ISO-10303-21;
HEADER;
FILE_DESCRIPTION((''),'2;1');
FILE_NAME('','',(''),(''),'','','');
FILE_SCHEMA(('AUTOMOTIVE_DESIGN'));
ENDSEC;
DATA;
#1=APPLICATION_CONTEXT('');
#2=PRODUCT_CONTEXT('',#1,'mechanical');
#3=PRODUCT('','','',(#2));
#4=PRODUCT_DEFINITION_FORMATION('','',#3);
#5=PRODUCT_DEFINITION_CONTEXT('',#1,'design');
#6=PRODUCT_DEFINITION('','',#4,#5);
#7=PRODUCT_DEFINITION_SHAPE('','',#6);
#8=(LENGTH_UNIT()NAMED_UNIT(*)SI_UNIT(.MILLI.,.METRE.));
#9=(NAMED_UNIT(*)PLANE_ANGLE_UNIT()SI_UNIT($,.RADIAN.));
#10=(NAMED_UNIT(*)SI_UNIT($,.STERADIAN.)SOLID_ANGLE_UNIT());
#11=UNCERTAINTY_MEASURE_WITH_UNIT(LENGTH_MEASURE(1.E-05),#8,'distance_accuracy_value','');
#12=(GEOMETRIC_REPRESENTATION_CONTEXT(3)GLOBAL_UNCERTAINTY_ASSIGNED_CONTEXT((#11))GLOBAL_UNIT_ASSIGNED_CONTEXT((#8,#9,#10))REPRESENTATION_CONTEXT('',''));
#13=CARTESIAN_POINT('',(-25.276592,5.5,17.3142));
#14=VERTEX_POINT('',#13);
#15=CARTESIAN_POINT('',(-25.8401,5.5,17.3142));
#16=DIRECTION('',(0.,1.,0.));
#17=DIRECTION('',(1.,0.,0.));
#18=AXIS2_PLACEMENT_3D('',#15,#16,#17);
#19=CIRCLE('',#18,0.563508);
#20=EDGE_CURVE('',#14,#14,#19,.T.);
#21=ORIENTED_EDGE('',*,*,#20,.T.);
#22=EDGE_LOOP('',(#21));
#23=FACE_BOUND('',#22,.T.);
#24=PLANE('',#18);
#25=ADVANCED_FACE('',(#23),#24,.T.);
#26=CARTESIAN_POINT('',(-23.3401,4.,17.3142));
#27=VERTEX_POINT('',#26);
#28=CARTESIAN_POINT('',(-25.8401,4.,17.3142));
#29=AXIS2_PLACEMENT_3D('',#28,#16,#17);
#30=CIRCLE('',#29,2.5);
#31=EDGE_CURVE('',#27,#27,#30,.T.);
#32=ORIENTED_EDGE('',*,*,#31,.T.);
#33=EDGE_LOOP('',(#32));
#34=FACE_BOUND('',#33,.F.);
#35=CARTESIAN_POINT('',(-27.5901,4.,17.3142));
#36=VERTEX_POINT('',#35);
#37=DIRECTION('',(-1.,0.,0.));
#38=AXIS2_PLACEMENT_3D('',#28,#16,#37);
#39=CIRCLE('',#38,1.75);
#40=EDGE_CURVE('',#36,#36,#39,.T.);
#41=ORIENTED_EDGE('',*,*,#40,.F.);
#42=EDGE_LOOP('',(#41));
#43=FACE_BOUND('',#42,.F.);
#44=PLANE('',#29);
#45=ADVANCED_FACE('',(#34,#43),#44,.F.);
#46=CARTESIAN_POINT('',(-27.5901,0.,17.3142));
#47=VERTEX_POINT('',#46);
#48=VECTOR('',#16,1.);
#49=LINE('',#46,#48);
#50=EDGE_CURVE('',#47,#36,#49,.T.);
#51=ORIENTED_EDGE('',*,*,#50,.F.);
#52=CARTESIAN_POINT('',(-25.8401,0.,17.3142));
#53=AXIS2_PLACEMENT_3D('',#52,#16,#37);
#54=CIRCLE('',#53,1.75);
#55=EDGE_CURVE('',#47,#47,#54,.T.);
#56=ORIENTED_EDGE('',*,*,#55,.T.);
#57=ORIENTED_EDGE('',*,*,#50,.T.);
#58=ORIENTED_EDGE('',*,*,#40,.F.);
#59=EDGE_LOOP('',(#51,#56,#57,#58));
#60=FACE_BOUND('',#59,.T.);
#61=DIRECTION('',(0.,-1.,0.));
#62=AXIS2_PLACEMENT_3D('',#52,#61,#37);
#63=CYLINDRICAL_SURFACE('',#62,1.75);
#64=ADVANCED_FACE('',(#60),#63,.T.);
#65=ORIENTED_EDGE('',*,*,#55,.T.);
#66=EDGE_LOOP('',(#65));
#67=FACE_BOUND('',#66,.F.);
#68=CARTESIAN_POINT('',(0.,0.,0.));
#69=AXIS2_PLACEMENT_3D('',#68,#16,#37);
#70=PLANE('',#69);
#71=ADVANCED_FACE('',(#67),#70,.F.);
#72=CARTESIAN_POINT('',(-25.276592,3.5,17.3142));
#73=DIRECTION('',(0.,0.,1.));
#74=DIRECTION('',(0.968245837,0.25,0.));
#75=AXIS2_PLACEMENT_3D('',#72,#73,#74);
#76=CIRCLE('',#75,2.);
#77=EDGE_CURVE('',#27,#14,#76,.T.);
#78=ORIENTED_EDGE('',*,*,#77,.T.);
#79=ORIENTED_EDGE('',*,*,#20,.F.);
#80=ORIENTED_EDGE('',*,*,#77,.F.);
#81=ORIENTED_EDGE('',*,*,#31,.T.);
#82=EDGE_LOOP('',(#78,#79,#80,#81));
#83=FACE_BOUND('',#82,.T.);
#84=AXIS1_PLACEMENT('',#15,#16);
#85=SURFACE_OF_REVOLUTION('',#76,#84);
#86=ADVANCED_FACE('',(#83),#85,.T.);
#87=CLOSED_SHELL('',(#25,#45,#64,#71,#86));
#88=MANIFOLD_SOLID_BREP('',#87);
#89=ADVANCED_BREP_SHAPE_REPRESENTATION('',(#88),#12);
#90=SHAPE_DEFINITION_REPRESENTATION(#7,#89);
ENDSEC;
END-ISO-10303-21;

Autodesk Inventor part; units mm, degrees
ref_plane "YZ Plane" through (0, 0, 0) normal (1, 0, 0) x (0, 1, 0)
ref_plane "XZ Plane" through (0, 0, 0) normal (0, 1, 0) x (-1, 0, 0)
ref_plane "XY Plane" through (0, 0, 0) normal (0, 0, 1) x (1, 0, 0)
sketch "Sketch1" plane through (0, 0, 0) normal (0, 1, 0) x (-1, 0, 0)
  circle A0 centre (25.8401, 17.3142) radius 1.75
  point P0 (0, 0)
  dimension "d0" = 3.5
extrude "Extrusion1" add sketch "Sketch1" along normal blind 4
thread "Thread1" size "M3.5x0.6" class "6g" standard "ANSI Metric M Profile" full length
sketch "Sketch2" plane through (-25.8401, 4, 17.3142) normal (0, 1, 0) x (1, 0, 0)
  circle A0 centre (0, 0) radius 2.5
  point P0 (25.8401, 17.3142)
  dimension "d5" = 5
extrude "Extrusion2" add sketch "Sketch2" along normal blind 1.5
fillet "Fillet1" radius 2 1 edges at (-28.3401, 5.5, 17.3142)
properties part number "screwLarge"
